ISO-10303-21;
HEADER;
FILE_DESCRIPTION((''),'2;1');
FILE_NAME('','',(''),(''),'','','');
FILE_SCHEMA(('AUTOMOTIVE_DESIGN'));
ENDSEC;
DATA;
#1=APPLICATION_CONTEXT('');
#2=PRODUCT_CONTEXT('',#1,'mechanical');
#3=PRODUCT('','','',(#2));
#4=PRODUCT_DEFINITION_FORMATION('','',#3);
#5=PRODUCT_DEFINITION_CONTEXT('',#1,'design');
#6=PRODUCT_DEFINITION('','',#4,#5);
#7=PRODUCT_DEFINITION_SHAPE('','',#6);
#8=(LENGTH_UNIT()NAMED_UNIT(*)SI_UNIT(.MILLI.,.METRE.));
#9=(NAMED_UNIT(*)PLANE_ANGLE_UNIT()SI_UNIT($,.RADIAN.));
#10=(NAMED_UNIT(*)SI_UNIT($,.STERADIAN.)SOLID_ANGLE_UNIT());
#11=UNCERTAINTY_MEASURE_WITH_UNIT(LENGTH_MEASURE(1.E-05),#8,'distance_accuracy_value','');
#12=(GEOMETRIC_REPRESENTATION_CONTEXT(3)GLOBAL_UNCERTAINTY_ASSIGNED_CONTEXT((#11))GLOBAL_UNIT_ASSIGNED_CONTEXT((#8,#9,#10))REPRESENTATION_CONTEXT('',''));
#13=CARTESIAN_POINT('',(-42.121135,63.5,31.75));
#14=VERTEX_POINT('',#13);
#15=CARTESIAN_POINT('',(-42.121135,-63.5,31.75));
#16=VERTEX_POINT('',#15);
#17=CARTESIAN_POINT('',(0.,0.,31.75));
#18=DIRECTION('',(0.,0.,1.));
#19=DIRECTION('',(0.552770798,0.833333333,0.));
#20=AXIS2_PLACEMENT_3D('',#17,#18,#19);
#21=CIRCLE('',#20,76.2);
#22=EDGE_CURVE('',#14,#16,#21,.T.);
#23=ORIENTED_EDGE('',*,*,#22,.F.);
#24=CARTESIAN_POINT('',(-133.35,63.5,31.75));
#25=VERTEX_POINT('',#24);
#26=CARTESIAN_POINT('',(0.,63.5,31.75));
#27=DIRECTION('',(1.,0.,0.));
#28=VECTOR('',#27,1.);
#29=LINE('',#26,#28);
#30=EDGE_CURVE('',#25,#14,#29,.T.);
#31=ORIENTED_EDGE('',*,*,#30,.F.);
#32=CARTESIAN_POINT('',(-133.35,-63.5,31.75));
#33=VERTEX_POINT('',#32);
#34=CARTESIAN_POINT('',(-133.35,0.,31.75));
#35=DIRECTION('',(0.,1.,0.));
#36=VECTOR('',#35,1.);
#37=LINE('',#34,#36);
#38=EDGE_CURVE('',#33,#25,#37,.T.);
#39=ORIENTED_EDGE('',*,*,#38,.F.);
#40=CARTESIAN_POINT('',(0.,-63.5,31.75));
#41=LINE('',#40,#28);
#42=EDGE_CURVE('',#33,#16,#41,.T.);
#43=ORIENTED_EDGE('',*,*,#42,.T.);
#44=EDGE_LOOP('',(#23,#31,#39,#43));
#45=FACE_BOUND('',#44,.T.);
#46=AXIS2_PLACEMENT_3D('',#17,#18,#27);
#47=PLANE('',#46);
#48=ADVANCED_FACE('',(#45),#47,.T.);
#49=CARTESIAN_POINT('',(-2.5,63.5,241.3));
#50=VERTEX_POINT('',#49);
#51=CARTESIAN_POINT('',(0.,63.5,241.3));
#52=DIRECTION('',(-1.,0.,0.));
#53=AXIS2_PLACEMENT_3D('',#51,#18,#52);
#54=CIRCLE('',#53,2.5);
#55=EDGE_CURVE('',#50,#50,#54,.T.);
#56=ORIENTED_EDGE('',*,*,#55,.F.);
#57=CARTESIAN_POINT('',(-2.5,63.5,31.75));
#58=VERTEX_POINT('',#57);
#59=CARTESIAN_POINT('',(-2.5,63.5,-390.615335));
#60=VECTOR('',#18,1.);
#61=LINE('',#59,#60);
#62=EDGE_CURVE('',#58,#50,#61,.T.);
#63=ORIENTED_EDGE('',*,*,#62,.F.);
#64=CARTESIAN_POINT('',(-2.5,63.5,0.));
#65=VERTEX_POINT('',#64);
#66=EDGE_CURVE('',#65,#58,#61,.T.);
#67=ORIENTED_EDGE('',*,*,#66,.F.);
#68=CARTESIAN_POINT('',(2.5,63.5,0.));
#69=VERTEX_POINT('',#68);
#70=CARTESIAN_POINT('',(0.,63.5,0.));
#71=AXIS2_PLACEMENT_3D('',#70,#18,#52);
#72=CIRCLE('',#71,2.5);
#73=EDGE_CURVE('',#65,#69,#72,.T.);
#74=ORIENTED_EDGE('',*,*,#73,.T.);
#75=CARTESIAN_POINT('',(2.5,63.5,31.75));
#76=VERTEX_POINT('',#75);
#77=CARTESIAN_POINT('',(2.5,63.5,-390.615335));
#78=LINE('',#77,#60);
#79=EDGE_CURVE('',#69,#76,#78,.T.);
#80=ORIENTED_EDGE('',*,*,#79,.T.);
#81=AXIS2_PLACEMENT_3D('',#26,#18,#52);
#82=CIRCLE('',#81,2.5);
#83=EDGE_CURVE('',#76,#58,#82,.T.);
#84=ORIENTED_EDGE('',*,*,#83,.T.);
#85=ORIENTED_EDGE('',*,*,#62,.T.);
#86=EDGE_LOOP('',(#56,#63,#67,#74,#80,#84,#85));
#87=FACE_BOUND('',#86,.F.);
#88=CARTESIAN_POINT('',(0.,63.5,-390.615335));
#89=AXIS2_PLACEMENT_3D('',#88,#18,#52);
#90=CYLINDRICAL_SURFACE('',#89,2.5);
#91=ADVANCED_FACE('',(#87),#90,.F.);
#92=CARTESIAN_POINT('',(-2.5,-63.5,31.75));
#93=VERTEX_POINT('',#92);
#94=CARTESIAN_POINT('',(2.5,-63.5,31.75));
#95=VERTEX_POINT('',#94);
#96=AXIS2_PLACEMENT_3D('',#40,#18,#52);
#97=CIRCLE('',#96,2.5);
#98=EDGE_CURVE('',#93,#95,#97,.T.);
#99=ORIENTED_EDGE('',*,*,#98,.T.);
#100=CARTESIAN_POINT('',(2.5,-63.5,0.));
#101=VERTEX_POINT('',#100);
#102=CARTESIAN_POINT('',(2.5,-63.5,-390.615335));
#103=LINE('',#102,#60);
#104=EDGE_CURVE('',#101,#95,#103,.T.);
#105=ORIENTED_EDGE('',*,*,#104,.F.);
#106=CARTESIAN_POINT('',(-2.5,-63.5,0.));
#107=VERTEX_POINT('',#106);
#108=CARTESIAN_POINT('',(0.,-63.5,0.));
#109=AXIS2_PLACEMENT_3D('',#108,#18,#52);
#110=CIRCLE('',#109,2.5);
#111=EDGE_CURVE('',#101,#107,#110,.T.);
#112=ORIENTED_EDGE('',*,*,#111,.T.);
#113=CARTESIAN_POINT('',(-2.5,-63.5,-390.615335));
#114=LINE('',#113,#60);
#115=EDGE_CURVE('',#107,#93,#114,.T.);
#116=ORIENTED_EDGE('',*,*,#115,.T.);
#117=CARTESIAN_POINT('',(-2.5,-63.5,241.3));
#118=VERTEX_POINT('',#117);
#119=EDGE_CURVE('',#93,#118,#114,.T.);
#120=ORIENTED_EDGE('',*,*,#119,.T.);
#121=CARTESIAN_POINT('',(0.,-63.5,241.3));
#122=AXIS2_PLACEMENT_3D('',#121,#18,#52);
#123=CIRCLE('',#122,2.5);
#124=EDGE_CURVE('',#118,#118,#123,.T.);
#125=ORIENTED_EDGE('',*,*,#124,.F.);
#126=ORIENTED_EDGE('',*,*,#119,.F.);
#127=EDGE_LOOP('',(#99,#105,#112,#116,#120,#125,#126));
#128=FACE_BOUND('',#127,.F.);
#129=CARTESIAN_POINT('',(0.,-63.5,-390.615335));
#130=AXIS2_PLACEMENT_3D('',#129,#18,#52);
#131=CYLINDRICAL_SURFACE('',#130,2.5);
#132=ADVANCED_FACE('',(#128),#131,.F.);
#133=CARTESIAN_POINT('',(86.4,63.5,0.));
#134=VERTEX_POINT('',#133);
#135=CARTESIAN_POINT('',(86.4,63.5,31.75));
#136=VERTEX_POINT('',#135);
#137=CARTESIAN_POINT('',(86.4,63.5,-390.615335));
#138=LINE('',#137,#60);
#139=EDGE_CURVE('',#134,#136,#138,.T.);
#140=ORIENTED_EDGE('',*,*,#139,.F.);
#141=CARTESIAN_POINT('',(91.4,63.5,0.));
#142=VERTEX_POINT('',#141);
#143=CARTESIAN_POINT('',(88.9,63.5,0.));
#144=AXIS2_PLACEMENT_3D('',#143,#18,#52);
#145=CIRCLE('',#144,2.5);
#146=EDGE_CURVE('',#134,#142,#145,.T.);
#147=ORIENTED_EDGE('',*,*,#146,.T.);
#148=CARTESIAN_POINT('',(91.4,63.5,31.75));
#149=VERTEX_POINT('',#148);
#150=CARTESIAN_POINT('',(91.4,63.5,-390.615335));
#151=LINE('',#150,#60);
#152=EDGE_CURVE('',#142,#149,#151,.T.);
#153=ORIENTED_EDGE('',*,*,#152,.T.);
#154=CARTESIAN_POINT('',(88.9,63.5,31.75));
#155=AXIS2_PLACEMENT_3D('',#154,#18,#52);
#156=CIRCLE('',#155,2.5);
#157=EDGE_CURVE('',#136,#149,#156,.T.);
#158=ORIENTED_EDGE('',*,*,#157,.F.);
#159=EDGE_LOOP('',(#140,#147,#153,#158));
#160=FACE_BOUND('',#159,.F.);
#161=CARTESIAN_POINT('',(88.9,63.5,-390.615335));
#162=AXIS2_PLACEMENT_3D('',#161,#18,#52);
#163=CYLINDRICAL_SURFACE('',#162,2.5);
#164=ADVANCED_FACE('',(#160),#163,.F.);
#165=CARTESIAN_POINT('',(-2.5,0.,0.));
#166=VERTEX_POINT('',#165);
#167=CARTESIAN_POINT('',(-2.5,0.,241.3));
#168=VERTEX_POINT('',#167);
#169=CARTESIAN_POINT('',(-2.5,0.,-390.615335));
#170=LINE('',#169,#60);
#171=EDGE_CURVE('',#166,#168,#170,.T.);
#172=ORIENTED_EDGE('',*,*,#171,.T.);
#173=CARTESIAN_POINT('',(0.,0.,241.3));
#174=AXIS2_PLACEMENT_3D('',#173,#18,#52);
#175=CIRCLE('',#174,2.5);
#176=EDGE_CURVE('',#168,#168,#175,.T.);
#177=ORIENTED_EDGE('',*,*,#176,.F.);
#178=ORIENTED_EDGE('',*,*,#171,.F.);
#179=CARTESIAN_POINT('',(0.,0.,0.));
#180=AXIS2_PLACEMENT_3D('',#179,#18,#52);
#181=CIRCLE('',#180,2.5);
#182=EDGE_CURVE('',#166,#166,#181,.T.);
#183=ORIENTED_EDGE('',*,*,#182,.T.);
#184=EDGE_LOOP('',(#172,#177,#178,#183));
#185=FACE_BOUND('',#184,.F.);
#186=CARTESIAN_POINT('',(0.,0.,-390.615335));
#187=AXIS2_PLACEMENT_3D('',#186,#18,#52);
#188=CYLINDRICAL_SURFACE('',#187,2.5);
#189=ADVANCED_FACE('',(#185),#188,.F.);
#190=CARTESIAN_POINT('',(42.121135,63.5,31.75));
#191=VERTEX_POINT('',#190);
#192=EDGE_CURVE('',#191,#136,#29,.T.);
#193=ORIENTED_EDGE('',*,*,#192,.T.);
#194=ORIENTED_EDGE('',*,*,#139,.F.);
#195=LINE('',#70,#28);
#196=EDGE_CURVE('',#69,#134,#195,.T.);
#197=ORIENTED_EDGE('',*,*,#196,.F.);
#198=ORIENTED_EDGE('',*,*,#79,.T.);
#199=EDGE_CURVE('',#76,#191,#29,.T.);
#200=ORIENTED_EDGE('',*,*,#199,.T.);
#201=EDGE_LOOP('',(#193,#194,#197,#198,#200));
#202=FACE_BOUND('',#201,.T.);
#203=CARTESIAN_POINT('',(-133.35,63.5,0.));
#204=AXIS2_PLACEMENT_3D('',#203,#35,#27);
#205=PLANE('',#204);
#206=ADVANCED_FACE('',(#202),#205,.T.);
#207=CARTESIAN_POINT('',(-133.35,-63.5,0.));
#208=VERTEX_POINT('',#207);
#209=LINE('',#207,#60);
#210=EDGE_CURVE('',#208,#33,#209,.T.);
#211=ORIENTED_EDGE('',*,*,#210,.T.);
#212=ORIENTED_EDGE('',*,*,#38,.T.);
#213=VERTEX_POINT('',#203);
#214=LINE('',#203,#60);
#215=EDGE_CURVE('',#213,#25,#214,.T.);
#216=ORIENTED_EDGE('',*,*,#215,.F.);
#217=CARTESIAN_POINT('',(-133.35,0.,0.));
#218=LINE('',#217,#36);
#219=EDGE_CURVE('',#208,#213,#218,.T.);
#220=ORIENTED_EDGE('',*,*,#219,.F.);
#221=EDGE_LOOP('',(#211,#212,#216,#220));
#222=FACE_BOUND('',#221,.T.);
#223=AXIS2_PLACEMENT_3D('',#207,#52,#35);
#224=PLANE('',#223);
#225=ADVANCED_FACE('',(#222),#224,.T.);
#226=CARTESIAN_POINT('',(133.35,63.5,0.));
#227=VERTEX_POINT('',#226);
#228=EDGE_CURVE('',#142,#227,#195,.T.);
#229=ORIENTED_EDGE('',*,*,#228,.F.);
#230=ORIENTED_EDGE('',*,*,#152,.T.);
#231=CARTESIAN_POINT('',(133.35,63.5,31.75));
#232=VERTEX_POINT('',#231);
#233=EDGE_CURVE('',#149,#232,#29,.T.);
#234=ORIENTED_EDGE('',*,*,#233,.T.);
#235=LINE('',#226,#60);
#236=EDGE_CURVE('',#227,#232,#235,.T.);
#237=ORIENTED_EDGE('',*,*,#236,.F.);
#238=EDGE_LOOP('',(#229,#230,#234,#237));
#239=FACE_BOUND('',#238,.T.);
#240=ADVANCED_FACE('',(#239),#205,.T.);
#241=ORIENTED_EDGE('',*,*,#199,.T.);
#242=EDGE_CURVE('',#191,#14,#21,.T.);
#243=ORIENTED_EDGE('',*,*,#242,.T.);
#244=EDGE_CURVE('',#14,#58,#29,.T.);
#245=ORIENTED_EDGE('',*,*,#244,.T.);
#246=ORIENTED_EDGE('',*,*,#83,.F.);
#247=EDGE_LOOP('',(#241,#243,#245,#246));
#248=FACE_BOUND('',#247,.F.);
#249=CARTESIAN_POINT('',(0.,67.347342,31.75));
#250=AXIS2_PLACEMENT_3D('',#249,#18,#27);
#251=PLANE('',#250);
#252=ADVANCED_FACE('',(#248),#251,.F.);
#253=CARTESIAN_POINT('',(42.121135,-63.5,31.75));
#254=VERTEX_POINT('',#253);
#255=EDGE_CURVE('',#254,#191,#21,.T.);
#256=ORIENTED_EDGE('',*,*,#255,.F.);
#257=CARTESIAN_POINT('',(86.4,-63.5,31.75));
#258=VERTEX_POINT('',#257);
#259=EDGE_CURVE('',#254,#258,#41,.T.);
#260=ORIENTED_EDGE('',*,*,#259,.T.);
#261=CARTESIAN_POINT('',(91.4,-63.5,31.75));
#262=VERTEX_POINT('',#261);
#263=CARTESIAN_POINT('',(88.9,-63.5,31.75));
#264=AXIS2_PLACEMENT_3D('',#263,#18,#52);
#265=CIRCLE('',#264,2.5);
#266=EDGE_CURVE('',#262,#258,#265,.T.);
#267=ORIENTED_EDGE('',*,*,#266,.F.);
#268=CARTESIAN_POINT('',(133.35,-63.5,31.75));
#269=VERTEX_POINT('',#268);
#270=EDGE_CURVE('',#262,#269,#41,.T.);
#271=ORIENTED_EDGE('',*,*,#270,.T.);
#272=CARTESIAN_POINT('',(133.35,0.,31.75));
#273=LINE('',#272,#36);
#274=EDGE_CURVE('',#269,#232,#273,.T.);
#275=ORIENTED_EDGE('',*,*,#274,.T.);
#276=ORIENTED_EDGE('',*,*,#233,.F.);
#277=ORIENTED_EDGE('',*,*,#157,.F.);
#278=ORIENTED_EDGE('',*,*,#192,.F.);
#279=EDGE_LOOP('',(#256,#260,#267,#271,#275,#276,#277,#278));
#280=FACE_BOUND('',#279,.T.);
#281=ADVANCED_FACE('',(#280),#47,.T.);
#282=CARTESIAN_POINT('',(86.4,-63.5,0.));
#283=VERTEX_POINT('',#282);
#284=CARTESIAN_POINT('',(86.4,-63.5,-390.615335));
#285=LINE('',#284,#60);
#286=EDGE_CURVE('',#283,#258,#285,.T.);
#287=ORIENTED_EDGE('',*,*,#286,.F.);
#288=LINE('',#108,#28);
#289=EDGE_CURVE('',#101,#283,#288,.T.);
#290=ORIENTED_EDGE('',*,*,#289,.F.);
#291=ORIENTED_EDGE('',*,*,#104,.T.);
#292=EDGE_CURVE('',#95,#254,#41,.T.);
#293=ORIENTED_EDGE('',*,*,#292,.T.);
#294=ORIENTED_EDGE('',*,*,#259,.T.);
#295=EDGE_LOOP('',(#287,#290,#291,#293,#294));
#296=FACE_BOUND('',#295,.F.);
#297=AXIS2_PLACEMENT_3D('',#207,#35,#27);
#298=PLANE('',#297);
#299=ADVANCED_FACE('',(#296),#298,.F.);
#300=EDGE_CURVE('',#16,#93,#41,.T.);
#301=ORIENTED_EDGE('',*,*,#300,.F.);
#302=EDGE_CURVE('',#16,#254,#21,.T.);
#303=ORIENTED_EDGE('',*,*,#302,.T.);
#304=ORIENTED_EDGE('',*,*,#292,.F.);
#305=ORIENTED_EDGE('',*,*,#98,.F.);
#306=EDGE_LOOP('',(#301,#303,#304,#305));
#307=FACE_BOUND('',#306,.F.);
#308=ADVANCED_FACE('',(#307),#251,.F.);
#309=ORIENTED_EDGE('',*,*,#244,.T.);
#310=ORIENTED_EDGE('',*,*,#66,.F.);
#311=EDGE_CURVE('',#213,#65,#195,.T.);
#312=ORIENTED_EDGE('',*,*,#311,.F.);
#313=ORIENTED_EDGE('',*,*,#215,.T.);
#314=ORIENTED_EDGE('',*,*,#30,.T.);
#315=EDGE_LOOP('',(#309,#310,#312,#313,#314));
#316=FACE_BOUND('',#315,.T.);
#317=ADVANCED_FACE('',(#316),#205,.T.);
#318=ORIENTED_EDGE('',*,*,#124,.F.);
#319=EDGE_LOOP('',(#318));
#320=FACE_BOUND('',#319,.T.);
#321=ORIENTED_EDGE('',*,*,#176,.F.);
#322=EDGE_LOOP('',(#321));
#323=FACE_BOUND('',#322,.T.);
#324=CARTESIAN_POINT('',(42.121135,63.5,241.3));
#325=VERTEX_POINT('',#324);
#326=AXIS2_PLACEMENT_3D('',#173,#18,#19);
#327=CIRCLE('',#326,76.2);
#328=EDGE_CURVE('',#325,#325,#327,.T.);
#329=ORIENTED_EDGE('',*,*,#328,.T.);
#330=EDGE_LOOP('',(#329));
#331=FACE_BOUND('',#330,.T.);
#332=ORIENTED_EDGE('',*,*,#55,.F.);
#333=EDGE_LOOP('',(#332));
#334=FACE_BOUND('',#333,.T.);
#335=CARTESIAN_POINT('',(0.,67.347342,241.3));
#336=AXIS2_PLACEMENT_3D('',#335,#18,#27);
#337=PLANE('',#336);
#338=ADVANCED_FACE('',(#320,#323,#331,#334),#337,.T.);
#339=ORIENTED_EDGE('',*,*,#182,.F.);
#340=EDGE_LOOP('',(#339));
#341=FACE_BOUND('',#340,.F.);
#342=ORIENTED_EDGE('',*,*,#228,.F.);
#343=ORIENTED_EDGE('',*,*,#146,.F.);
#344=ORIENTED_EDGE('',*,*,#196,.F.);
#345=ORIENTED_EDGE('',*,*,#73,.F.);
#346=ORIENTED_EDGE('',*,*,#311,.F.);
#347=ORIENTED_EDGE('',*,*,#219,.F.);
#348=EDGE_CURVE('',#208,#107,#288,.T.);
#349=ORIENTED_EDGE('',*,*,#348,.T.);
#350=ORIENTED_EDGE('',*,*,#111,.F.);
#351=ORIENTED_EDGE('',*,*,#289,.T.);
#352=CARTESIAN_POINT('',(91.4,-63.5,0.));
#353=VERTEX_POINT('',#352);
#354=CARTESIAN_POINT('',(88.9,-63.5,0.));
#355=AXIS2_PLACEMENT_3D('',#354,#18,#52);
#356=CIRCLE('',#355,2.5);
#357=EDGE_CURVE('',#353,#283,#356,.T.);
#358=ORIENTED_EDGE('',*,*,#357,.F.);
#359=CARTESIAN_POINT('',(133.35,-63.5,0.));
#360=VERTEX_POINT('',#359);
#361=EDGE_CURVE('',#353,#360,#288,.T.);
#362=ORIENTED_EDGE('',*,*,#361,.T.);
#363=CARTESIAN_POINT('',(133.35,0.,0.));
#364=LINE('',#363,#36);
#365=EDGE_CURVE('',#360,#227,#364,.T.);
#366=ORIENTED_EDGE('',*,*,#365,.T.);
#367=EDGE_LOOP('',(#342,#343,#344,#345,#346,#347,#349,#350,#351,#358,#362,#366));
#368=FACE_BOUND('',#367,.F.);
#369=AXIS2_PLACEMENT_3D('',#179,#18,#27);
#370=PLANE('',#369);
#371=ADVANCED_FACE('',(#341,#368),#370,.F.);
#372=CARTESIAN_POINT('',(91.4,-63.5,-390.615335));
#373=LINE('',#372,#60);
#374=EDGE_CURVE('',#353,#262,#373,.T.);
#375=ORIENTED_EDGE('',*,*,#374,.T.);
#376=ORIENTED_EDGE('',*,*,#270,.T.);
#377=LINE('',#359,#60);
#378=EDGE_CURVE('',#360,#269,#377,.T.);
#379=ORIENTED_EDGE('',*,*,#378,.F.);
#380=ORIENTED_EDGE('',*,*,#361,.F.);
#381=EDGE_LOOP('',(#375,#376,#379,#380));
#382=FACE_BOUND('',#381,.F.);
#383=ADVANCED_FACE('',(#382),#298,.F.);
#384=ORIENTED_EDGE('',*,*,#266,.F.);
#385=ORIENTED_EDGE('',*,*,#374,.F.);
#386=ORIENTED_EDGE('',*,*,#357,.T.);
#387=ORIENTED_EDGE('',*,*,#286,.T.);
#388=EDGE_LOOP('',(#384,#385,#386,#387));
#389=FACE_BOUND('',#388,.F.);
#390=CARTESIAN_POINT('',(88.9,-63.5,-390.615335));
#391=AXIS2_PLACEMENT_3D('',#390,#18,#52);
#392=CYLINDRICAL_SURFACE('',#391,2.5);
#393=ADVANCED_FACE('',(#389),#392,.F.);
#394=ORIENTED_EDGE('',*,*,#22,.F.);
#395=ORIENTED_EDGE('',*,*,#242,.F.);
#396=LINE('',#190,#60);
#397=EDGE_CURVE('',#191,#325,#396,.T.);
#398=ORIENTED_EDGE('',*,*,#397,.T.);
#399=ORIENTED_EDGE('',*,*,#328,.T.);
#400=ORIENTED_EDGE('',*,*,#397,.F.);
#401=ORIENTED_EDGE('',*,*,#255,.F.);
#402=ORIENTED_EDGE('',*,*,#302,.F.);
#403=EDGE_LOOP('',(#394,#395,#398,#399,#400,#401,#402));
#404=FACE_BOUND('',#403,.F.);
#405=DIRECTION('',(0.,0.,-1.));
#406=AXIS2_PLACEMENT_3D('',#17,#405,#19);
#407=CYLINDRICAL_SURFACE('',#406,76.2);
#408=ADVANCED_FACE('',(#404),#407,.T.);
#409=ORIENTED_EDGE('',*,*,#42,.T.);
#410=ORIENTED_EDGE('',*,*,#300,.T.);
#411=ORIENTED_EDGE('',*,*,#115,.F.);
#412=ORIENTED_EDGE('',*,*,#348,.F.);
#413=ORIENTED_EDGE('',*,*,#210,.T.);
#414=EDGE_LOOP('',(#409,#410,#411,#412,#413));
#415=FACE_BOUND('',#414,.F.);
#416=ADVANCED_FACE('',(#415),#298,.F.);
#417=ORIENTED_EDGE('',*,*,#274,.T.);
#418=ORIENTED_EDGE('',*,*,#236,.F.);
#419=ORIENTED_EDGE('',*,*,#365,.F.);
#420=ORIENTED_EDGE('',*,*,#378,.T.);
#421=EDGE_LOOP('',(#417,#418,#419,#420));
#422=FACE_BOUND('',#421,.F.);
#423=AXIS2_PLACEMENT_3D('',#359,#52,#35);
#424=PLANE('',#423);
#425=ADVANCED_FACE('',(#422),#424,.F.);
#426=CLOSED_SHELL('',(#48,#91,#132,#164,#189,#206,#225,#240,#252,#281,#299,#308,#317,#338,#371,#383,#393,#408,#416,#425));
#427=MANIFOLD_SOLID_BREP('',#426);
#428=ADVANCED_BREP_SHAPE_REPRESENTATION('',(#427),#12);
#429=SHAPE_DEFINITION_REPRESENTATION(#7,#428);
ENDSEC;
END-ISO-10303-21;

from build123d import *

# Parameters (mm, degrees)
F0_W     = 266.7
F0_H     = 127
F1_DEPTH = 31.75
F3_DEPTH = 209.55
F4_D     = 5


with BuildPart() as f1:
    # F0 (on Top) → F1 (new body)
    with BuildSketch(Plane.XY):
        Rectangle(F0_W, F0_H)
    extrude(amount=F1_DEPTH)

    # F2 (on face) → F3 (join)
    with BuildSketch(Plane.XY.offset(31.75)):
        with BuildLine():
            Line((-42.1211348375, 63.5), (42.1211348375, 63.5))
            ThreePointArc((42.1211348375, 63.5), (0, 76.2), (-42.1211348375, 63.5))
        make_face()
        with BuildLine():
            ThreePointArc((42.1211348375, -63.5), (67.1419037361, -36.0333840028), (76.2, 0))
            ThreePointArc((76.2, 0), (67.1419037361, 36.0333840028), (42.1211348375, 63.5))
            Line((42.1211348375, 63.5), (-42.1211348375, 63.5))
            ThreePointArc((-42.1211348375, 63.5), (-76.2, 0), (-42.1211348375, -63.5))
            Line((-42.1211348375, -63.5), (42.1211348375, -63.5))
        make_face()
        with BuildLine():
            ThreePointArc((-42.1211348375, -63.5), (0, -76.2), (42.1211348375, -63.5))
            Line((42.1211348375, -63.5), (-42.1211348375, -63.5))
        make_face()
    extrude(amount=F3_DEPTH)

    # F4 (through all)
    with Locations(Plane(origin=(0, 0, 0), x_dir=(1, 0, 0), z_dir=(0, 0, -1))):
        with Locations((88.9, -63.5), (88.9, 63.5), (0, 63.5), (0, -63.5), (0, 0)):
            Hole(F4_D / 2)


solid = f1.part
